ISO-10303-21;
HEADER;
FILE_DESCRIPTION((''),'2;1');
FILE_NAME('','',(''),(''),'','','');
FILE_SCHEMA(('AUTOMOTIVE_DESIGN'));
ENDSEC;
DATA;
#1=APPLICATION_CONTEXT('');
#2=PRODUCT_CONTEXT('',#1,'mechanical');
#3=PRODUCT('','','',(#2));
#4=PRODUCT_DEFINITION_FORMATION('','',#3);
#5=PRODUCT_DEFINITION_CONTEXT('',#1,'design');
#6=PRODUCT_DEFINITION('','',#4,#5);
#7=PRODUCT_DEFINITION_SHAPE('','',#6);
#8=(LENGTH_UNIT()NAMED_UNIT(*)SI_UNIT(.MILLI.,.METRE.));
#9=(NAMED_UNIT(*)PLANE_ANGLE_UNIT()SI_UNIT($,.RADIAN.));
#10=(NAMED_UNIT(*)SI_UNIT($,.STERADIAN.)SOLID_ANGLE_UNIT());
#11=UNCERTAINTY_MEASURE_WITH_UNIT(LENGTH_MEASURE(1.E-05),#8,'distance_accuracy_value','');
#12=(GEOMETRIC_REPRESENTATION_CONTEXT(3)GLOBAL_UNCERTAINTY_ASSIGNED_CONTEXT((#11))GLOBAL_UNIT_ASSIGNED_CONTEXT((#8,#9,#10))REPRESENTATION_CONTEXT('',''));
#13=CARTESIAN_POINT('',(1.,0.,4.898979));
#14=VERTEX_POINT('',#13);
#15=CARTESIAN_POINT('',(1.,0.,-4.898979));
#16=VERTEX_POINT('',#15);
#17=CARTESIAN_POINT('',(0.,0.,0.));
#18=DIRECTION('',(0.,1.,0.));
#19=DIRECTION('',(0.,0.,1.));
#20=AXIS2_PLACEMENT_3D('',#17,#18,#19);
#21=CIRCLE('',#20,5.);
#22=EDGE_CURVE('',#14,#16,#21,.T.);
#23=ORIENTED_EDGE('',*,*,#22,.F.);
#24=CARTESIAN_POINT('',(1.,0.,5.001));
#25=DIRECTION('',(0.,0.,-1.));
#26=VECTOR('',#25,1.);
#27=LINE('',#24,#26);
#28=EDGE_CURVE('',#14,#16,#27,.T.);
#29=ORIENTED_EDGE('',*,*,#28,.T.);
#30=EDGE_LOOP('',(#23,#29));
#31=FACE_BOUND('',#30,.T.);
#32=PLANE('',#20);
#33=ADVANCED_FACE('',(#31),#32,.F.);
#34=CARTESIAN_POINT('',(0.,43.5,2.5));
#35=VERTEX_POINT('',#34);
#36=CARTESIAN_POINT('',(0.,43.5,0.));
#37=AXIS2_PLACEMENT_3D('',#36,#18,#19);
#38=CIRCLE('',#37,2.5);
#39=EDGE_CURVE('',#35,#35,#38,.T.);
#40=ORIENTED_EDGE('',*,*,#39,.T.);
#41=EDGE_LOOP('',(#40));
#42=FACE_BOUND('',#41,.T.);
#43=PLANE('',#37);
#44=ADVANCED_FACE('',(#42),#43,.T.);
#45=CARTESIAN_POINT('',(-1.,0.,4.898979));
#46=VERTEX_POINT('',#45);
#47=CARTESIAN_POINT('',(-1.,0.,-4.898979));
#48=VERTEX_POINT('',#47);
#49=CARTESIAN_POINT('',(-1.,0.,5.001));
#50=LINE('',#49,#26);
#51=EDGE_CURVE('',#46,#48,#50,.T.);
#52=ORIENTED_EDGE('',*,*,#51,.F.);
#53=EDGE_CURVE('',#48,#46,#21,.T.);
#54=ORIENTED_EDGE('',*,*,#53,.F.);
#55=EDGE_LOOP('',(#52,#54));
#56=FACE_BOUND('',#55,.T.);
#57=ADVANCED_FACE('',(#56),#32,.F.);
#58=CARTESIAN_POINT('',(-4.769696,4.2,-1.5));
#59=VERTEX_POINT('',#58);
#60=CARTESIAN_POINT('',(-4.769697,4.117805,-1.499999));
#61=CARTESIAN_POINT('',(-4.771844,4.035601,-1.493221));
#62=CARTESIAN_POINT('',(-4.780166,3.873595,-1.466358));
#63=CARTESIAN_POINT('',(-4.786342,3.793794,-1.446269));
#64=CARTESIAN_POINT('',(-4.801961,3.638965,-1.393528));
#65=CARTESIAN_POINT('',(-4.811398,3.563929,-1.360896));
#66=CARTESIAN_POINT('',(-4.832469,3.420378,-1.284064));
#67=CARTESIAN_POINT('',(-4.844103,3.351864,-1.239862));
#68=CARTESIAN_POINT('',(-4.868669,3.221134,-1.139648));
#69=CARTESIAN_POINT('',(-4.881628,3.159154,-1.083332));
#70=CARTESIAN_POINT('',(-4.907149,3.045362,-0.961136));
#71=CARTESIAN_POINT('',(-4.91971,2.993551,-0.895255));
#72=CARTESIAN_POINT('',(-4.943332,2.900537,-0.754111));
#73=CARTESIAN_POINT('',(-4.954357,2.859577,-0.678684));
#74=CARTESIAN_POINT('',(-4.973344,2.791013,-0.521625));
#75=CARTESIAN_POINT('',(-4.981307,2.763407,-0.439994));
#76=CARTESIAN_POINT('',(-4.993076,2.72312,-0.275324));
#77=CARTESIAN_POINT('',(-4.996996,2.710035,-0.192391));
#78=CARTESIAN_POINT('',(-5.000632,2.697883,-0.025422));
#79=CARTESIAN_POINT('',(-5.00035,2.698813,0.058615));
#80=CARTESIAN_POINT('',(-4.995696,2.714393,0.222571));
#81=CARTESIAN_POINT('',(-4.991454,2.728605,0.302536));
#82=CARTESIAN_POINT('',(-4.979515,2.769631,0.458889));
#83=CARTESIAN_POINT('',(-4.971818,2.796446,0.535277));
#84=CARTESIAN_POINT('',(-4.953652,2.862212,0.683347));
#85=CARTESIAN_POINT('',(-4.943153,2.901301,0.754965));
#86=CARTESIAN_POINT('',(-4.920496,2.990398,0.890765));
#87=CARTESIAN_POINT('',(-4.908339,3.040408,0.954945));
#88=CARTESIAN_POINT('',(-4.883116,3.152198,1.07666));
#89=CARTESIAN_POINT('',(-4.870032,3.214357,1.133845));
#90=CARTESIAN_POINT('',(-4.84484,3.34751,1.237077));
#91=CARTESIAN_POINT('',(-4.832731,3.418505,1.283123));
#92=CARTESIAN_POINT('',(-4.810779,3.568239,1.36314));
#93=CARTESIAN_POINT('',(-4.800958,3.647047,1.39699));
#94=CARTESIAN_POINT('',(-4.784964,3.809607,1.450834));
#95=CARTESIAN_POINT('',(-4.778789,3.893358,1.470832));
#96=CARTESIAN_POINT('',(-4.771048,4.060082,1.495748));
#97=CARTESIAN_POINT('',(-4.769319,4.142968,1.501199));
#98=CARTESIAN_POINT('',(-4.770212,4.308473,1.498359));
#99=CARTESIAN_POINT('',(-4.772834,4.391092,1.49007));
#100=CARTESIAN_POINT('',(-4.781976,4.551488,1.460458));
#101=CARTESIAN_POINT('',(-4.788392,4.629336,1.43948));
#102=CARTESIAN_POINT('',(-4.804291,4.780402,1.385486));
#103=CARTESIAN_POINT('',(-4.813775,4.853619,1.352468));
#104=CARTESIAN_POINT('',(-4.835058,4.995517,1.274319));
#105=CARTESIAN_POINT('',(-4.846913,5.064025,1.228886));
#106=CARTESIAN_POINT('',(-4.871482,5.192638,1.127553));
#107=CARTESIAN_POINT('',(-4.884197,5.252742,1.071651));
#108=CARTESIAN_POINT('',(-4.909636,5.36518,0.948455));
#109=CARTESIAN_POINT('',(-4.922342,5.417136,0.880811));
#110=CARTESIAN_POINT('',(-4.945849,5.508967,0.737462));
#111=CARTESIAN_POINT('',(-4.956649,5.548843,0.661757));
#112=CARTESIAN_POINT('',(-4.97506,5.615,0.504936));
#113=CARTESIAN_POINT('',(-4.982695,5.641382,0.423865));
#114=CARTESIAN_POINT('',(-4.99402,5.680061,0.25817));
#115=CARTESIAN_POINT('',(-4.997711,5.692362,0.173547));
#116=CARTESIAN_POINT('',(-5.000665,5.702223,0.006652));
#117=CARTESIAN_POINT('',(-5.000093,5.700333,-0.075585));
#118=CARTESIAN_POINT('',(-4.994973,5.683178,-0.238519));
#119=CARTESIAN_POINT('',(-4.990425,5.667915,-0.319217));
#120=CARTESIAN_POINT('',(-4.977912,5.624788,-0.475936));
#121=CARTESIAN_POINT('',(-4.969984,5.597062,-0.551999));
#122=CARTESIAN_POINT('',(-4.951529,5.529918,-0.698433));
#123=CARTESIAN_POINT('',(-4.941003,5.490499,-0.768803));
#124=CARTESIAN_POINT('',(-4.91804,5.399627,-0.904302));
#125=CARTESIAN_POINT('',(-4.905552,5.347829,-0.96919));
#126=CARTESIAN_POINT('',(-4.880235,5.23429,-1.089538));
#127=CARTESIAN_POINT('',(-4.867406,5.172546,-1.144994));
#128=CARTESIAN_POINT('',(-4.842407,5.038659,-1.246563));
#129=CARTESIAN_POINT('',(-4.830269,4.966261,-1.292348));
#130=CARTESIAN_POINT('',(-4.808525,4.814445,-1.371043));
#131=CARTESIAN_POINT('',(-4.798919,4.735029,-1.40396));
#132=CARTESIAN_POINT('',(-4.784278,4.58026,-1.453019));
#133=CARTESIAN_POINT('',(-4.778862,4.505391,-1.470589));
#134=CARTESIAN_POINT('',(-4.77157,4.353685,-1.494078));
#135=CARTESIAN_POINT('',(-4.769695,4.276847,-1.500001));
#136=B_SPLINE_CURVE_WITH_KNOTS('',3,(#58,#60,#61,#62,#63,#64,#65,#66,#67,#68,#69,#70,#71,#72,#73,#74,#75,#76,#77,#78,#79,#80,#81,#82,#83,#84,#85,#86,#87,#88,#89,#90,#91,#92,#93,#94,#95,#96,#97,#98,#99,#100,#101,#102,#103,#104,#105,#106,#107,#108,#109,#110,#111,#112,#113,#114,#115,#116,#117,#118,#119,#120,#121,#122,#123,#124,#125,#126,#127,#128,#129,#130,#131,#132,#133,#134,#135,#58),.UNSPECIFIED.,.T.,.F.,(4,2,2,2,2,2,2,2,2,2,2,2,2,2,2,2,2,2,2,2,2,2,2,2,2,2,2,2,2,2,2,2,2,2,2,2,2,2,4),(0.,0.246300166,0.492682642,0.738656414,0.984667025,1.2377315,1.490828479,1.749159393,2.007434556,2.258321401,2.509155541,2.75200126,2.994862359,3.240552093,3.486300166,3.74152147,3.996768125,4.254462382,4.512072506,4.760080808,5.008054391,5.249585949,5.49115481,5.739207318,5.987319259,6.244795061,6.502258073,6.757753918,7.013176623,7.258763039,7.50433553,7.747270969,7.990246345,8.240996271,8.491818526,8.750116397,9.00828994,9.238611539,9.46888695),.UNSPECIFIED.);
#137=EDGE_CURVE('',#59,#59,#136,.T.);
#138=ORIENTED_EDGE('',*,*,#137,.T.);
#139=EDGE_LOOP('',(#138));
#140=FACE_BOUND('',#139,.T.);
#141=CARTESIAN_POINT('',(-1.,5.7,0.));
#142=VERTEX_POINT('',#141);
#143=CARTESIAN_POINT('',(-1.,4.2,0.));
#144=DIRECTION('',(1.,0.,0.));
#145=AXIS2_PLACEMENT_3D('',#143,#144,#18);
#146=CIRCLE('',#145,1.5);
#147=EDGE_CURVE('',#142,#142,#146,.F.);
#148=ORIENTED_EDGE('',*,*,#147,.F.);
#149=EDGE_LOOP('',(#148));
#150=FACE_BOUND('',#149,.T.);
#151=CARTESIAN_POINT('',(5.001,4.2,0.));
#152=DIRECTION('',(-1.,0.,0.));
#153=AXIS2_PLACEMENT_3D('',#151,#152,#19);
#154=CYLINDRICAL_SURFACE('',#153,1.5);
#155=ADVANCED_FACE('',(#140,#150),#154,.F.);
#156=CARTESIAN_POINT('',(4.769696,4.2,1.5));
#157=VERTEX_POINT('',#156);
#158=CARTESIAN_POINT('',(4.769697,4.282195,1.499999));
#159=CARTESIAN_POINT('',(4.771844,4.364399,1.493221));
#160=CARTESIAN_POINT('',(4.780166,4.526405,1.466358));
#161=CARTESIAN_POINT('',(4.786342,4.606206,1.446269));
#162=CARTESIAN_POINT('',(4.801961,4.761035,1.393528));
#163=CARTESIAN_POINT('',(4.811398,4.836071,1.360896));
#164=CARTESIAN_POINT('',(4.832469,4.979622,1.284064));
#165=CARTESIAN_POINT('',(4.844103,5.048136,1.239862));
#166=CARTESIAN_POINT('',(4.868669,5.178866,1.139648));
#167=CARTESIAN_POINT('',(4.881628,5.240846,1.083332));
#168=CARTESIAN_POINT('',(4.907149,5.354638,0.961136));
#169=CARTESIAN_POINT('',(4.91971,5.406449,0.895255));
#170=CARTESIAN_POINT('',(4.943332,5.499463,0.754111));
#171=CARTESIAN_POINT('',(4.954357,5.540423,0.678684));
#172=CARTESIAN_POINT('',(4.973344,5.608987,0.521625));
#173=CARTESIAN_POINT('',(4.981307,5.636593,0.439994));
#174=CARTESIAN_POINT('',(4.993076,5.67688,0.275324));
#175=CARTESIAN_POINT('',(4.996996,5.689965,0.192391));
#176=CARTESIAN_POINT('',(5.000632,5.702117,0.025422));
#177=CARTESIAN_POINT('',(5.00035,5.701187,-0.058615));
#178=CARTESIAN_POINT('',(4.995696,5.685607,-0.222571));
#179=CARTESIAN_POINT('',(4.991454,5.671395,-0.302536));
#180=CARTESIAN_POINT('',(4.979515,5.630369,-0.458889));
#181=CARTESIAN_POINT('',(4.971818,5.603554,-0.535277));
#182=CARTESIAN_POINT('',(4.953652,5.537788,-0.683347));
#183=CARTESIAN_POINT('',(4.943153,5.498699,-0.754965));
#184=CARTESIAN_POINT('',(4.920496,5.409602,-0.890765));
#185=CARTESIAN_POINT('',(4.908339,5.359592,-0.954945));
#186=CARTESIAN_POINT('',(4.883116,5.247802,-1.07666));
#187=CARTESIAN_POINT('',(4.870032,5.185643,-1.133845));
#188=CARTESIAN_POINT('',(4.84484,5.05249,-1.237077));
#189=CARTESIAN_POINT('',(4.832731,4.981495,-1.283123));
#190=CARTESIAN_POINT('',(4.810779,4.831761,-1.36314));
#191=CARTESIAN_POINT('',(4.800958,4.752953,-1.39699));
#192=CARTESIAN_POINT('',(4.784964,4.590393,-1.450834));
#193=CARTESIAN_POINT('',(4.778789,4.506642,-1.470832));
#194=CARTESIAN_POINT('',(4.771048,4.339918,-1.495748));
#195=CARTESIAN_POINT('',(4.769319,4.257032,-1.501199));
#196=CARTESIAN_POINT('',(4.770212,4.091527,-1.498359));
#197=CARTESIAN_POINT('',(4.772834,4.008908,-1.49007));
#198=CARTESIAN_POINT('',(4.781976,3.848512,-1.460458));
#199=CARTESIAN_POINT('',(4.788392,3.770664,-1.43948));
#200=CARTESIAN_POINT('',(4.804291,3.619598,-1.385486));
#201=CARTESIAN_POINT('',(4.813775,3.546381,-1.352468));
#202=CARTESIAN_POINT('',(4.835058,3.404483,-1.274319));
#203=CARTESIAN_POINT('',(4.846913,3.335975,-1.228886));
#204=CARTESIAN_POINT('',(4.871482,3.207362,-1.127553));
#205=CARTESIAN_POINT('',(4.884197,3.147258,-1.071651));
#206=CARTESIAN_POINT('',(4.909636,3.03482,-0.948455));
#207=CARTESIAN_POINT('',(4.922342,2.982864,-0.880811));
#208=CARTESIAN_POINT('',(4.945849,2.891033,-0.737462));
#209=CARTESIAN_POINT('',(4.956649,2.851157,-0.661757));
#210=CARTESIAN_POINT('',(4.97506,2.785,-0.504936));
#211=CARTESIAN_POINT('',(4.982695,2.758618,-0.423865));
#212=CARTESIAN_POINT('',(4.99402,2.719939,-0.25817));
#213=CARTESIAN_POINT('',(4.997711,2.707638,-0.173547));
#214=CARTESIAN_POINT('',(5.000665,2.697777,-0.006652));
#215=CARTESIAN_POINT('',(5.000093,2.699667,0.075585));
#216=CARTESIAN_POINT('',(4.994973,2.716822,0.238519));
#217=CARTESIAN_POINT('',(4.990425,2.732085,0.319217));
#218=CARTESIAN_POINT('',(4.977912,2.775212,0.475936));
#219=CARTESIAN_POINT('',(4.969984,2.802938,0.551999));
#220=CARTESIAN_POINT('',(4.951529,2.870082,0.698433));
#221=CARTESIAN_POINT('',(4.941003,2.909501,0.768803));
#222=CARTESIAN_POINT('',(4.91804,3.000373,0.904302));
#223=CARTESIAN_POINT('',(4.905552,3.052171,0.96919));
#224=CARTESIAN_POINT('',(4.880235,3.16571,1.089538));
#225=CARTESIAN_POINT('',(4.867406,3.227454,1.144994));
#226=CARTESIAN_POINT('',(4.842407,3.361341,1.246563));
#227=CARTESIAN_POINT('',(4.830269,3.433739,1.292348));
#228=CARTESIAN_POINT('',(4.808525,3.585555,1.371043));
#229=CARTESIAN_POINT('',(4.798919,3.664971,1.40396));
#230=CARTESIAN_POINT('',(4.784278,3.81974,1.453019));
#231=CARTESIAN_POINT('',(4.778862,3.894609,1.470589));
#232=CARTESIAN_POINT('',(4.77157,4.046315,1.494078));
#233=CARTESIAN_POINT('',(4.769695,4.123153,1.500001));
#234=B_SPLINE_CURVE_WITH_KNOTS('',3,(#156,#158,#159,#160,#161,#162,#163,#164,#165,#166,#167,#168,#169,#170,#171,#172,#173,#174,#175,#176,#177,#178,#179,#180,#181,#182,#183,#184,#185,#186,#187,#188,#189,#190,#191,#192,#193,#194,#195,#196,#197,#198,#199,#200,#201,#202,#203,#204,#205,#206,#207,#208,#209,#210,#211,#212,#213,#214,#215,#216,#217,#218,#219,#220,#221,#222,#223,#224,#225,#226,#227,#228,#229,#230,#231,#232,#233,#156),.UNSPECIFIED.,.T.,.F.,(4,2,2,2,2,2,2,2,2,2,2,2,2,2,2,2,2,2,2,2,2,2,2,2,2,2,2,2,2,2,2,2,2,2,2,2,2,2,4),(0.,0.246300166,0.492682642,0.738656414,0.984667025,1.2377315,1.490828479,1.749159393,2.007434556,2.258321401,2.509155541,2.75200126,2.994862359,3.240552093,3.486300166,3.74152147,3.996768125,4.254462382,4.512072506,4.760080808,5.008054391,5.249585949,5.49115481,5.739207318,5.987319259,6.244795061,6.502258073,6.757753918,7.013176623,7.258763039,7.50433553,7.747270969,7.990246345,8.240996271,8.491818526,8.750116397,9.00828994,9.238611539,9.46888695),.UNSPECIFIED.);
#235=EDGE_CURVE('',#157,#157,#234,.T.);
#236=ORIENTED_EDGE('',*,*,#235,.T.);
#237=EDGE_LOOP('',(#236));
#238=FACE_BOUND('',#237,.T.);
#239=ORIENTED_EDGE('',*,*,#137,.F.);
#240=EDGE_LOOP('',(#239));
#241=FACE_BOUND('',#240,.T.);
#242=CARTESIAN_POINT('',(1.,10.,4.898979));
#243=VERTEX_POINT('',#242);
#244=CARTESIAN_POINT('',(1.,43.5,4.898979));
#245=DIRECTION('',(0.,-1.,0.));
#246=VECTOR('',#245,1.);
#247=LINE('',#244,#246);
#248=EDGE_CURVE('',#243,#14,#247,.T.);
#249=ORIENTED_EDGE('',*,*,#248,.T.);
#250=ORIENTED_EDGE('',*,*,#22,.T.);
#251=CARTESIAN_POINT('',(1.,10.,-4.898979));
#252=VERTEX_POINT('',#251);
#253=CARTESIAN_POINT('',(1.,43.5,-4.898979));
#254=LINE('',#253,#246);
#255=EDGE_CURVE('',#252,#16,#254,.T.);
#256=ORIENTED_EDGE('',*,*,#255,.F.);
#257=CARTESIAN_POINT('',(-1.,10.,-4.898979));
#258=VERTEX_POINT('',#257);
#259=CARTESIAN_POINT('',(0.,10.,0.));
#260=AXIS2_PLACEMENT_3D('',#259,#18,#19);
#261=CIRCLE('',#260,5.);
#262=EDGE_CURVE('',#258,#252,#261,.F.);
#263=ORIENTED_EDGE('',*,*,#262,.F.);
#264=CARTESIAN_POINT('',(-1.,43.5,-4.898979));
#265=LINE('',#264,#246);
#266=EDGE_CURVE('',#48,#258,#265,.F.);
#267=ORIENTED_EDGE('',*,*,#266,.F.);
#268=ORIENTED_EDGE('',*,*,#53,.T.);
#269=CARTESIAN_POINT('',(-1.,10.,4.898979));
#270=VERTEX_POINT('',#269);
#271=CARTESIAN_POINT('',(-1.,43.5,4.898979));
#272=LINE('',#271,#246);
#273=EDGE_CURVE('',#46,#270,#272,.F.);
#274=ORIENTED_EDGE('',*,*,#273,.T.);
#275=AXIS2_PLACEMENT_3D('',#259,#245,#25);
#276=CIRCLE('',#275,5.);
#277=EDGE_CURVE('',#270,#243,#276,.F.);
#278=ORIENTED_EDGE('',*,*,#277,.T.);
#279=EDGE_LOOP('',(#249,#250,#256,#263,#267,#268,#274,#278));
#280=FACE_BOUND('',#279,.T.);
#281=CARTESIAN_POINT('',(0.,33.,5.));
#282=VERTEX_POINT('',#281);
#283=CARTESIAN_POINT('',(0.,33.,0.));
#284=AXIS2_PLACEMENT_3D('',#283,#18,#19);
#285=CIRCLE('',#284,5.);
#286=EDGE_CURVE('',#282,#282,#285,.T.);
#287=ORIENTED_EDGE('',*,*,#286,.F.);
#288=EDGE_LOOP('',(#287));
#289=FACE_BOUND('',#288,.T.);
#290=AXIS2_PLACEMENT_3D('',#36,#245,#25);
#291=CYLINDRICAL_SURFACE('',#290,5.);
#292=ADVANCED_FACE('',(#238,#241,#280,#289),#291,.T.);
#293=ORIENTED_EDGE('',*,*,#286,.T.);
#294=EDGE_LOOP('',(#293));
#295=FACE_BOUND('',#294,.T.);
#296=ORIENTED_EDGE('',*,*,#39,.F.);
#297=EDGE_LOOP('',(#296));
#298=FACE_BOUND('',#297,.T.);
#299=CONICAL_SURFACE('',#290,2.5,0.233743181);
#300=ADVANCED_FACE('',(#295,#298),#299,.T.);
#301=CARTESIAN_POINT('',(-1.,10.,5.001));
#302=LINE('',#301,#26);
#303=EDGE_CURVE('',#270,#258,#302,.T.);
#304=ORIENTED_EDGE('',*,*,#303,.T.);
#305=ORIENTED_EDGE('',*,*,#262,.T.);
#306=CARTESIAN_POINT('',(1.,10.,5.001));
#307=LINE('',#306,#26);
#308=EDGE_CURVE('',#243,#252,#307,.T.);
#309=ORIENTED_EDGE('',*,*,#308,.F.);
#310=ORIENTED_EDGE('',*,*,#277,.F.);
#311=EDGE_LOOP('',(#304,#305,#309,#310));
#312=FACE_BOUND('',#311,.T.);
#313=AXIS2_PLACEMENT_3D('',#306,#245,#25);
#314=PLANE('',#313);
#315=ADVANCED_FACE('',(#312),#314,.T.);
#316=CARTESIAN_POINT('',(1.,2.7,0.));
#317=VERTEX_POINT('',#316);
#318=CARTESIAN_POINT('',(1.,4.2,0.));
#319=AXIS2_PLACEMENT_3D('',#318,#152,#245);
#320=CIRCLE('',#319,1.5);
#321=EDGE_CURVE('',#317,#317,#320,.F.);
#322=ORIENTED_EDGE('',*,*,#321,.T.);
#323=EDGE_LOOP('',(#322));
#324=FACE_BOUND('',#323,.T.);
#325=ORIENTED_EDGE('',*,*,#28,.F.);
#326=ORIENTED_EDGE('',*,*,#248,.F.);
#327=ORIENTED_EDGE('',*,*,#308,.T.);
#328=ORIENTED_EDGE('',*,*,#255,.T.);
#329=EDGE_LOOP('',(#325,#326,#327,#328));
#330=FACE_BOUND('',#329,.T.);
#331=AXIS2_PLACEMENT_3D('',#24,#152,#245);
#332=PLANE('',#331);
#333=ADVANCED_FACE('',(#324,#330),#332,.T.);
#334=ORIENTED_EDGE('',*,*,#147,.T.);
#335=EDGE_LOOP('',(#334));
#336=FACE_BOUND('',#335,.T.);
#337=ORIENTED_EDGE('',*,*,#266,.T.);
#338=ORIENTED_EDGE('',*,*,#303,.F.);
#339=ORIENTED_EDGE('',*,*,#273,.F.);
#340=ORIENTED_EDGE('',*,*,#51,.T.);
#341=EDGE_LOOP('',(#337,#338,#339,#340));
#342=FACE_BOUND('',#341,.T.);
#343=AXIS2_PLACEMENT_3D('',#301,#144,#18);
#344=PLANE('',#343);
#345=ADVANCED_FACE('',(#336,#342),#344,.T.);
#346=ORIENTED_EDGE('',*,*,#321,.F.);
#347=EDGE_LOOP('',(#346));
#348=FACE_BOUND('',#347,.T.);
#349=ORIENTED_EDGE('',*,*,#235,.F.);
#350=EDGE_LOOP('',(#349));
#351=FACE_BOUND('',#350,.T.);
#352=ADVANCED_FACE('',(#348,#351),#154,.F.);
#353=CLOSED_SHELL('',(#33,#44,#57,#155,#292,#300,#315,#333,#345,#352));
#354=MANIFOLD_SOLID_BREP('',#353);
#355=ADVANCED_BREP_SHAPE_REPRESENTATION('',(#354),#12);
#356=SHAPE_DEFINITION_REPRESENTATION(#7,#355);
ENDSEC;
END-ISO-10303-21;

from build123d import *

# Parameters (mm, degrees)
CROQUIS1_R                             = 5
SALIENTE_EXTRUIR1_DEPTH                = 43.5
CORTAR_EXTRUIR1_REACH                  = 46.071
CORTAR_EXTRUIR1_END_RADIUS             = 5
CROQUIS8_R                             = 1.5
CORTAR_EXTRUIR1_DIRECTION_2_REACH      = 46.071
CORTAR_EXTRUIR1_DIRECTION_2_END_RADIUS = 5
CORTAR_EXTRUIR2_REACH                  = 46.071
CROQUIS9_W                             = 2
CROQUIS9_H                             = 10
CORTAR_EXTRUIR2_DIRECTION_2_REACH      = 46.071


# Read off the part's stored shape, not the designer's step: Cortar-Revolución-Lámina1
with BuildPart() as part:
    # Croquis1 → Saliente-Extruir1 (new body)
    with BuildSketch(Plane(origin=(0, 0, 0), x_dir=(1, 0, 0), z_dir=(0, 1, 0))):
        with Locations(Location((0, 0, 0), (0, 0, 270))):
            Circle(CROQUIS1_R)
    extrude(amount=SALIENTE_EXTRUIR1_DEPTH)

    # Cortar-Revolución-Lámina1 outline → Cortar-Revolución-Lámina1 (revolve, cut)
    with BuildSketch(Plane.XY):
        Polygon((5, 43.5), (2.5, 43.5), (5, 33), align=None)
    revolve(axis=Axis((0, 0, 0), (0, 1, 0)), mode=Mode.SUBTRACT)

    # Cortar-Extruir1: up to this cylinder (the profile starts inside it)
    cortar_extruir1_end = Plane(origin=(0, 4.2, 0), z_dir=(0, -1, 0)) * Cylinder(CORTAR_EXTRUIR1_END_RADIUS, 103.142, mode=Mode.PRIVATE)
    # Croquis8 → Cortar-Extruir1 (cut, up to the surface)
    with BuildSketch(Plane(origin=(0, 0, 0), x_dir=(0, 0, -1), z_dir=(1, 0, 0)), mode=Mode.PRIVATE) as cortar_extruir1_sk1:
        with Locations(Location((0, 4.2, 0), (0, 0, 180))):
            Circle(CROQUIS8_R)
    cortar_extruir1_tool1 = extrude(cortar_extruir1_sk1.sketch, amount=-CORTAR_EXTRUIR1_REACH, mode=Mode.PRIVATE) & cortar_extruir1_end
    add(cortar_extruir1_tool1.solids().sort_by_distance((0, 4.2, 0))[0], mode=Mode.SUBTRACT)

    # Cortar-Extruir1 direction 2: up to this cylinder (the profile starts inside it)
    cortar_extruir1_direction_2_end = Plane(origin=(0, 4.2, 0), z_dir=(0, -1, 0)) * Cylinder(CORTAR_EXTRUIR1_DIRECTION_2_END_RADIUS, 103.142, mode=Mode.PRIVATE)
    # Croquis8 → Cortar-Extruir1 direction 2 (cut, up to the surface)
    with BuildSketch(Plane(origin=(0, 0, 0), x_dir=(0, 0, -1), z_dir=(1, 0, 0)), mode=Mode.PRIVATE) as cortar_extruir1_direction_2_sk1:
        with Locations(Location((0, 4.2, 0), (0, 0, 180))):
            Circle(CROQUIS8_R)
    cortar_extruir1_direction_2_tool1 = extrude(cortar_extruir1_direction_2_sk1.sketch, amount=CORTAR_EXTRUIR1_DIRECTION_2_REACH, mode=Mode.PRIVATE) & cortar_extruir1_direction_2_end
    add(cortar_extruir1_direction_2_tool1.solids().sort_by_distance((0, 4.2, 0))[0], mode=Mode.SUBTRACT)

    # Croquis9 → Cortar-Extruir2 (cut, up to next)
    with BuildSketch(Plane.XY, mode=Mode.PRIVATE) as cortar_extruir2_sk1:
        with Locations((0, 5)):
            Rectangle(CROQUIS9_W, CROQUIS9_H)
    cortar_extruir2_tool1 = extrude(cortar_extruir2_sk1.sketch, amount=-CORTAR_EXTRUIR2_REACH, mode=Mode.PRIVATE) & part.part
    add(cortar_extruir2_tool1.solids().sort_by_distance((0, 5, 0))[0], mode=Mode.SUBTRACT)

    # Croquis9 → Cortar-Extruir2 direction 2 (cut, up to next)
    with BuildSketch(Plane.XY, mode=Mode.PRIVATE) as cortar_extruir2_direction_2_sk1:
        with Locations((0, 5)):
            Rectangle(CROQUIS9_W, CROQUIS9_H)
    cortar_extruir2_direction_2_tool1 = extrude(cortar_extruir2_direction_2_sk1.sketch, amount=CORTAR_EXTRUIR2_DIRECTION_2_REACH, mode=Mode.PRIVATE) & part.part
    add(cortar_extruir2_direction_2_tool1.solids().sort_by_distance((0, 5, 0))[0], mode=Mode.SUBTRACT)


solid = part.part
